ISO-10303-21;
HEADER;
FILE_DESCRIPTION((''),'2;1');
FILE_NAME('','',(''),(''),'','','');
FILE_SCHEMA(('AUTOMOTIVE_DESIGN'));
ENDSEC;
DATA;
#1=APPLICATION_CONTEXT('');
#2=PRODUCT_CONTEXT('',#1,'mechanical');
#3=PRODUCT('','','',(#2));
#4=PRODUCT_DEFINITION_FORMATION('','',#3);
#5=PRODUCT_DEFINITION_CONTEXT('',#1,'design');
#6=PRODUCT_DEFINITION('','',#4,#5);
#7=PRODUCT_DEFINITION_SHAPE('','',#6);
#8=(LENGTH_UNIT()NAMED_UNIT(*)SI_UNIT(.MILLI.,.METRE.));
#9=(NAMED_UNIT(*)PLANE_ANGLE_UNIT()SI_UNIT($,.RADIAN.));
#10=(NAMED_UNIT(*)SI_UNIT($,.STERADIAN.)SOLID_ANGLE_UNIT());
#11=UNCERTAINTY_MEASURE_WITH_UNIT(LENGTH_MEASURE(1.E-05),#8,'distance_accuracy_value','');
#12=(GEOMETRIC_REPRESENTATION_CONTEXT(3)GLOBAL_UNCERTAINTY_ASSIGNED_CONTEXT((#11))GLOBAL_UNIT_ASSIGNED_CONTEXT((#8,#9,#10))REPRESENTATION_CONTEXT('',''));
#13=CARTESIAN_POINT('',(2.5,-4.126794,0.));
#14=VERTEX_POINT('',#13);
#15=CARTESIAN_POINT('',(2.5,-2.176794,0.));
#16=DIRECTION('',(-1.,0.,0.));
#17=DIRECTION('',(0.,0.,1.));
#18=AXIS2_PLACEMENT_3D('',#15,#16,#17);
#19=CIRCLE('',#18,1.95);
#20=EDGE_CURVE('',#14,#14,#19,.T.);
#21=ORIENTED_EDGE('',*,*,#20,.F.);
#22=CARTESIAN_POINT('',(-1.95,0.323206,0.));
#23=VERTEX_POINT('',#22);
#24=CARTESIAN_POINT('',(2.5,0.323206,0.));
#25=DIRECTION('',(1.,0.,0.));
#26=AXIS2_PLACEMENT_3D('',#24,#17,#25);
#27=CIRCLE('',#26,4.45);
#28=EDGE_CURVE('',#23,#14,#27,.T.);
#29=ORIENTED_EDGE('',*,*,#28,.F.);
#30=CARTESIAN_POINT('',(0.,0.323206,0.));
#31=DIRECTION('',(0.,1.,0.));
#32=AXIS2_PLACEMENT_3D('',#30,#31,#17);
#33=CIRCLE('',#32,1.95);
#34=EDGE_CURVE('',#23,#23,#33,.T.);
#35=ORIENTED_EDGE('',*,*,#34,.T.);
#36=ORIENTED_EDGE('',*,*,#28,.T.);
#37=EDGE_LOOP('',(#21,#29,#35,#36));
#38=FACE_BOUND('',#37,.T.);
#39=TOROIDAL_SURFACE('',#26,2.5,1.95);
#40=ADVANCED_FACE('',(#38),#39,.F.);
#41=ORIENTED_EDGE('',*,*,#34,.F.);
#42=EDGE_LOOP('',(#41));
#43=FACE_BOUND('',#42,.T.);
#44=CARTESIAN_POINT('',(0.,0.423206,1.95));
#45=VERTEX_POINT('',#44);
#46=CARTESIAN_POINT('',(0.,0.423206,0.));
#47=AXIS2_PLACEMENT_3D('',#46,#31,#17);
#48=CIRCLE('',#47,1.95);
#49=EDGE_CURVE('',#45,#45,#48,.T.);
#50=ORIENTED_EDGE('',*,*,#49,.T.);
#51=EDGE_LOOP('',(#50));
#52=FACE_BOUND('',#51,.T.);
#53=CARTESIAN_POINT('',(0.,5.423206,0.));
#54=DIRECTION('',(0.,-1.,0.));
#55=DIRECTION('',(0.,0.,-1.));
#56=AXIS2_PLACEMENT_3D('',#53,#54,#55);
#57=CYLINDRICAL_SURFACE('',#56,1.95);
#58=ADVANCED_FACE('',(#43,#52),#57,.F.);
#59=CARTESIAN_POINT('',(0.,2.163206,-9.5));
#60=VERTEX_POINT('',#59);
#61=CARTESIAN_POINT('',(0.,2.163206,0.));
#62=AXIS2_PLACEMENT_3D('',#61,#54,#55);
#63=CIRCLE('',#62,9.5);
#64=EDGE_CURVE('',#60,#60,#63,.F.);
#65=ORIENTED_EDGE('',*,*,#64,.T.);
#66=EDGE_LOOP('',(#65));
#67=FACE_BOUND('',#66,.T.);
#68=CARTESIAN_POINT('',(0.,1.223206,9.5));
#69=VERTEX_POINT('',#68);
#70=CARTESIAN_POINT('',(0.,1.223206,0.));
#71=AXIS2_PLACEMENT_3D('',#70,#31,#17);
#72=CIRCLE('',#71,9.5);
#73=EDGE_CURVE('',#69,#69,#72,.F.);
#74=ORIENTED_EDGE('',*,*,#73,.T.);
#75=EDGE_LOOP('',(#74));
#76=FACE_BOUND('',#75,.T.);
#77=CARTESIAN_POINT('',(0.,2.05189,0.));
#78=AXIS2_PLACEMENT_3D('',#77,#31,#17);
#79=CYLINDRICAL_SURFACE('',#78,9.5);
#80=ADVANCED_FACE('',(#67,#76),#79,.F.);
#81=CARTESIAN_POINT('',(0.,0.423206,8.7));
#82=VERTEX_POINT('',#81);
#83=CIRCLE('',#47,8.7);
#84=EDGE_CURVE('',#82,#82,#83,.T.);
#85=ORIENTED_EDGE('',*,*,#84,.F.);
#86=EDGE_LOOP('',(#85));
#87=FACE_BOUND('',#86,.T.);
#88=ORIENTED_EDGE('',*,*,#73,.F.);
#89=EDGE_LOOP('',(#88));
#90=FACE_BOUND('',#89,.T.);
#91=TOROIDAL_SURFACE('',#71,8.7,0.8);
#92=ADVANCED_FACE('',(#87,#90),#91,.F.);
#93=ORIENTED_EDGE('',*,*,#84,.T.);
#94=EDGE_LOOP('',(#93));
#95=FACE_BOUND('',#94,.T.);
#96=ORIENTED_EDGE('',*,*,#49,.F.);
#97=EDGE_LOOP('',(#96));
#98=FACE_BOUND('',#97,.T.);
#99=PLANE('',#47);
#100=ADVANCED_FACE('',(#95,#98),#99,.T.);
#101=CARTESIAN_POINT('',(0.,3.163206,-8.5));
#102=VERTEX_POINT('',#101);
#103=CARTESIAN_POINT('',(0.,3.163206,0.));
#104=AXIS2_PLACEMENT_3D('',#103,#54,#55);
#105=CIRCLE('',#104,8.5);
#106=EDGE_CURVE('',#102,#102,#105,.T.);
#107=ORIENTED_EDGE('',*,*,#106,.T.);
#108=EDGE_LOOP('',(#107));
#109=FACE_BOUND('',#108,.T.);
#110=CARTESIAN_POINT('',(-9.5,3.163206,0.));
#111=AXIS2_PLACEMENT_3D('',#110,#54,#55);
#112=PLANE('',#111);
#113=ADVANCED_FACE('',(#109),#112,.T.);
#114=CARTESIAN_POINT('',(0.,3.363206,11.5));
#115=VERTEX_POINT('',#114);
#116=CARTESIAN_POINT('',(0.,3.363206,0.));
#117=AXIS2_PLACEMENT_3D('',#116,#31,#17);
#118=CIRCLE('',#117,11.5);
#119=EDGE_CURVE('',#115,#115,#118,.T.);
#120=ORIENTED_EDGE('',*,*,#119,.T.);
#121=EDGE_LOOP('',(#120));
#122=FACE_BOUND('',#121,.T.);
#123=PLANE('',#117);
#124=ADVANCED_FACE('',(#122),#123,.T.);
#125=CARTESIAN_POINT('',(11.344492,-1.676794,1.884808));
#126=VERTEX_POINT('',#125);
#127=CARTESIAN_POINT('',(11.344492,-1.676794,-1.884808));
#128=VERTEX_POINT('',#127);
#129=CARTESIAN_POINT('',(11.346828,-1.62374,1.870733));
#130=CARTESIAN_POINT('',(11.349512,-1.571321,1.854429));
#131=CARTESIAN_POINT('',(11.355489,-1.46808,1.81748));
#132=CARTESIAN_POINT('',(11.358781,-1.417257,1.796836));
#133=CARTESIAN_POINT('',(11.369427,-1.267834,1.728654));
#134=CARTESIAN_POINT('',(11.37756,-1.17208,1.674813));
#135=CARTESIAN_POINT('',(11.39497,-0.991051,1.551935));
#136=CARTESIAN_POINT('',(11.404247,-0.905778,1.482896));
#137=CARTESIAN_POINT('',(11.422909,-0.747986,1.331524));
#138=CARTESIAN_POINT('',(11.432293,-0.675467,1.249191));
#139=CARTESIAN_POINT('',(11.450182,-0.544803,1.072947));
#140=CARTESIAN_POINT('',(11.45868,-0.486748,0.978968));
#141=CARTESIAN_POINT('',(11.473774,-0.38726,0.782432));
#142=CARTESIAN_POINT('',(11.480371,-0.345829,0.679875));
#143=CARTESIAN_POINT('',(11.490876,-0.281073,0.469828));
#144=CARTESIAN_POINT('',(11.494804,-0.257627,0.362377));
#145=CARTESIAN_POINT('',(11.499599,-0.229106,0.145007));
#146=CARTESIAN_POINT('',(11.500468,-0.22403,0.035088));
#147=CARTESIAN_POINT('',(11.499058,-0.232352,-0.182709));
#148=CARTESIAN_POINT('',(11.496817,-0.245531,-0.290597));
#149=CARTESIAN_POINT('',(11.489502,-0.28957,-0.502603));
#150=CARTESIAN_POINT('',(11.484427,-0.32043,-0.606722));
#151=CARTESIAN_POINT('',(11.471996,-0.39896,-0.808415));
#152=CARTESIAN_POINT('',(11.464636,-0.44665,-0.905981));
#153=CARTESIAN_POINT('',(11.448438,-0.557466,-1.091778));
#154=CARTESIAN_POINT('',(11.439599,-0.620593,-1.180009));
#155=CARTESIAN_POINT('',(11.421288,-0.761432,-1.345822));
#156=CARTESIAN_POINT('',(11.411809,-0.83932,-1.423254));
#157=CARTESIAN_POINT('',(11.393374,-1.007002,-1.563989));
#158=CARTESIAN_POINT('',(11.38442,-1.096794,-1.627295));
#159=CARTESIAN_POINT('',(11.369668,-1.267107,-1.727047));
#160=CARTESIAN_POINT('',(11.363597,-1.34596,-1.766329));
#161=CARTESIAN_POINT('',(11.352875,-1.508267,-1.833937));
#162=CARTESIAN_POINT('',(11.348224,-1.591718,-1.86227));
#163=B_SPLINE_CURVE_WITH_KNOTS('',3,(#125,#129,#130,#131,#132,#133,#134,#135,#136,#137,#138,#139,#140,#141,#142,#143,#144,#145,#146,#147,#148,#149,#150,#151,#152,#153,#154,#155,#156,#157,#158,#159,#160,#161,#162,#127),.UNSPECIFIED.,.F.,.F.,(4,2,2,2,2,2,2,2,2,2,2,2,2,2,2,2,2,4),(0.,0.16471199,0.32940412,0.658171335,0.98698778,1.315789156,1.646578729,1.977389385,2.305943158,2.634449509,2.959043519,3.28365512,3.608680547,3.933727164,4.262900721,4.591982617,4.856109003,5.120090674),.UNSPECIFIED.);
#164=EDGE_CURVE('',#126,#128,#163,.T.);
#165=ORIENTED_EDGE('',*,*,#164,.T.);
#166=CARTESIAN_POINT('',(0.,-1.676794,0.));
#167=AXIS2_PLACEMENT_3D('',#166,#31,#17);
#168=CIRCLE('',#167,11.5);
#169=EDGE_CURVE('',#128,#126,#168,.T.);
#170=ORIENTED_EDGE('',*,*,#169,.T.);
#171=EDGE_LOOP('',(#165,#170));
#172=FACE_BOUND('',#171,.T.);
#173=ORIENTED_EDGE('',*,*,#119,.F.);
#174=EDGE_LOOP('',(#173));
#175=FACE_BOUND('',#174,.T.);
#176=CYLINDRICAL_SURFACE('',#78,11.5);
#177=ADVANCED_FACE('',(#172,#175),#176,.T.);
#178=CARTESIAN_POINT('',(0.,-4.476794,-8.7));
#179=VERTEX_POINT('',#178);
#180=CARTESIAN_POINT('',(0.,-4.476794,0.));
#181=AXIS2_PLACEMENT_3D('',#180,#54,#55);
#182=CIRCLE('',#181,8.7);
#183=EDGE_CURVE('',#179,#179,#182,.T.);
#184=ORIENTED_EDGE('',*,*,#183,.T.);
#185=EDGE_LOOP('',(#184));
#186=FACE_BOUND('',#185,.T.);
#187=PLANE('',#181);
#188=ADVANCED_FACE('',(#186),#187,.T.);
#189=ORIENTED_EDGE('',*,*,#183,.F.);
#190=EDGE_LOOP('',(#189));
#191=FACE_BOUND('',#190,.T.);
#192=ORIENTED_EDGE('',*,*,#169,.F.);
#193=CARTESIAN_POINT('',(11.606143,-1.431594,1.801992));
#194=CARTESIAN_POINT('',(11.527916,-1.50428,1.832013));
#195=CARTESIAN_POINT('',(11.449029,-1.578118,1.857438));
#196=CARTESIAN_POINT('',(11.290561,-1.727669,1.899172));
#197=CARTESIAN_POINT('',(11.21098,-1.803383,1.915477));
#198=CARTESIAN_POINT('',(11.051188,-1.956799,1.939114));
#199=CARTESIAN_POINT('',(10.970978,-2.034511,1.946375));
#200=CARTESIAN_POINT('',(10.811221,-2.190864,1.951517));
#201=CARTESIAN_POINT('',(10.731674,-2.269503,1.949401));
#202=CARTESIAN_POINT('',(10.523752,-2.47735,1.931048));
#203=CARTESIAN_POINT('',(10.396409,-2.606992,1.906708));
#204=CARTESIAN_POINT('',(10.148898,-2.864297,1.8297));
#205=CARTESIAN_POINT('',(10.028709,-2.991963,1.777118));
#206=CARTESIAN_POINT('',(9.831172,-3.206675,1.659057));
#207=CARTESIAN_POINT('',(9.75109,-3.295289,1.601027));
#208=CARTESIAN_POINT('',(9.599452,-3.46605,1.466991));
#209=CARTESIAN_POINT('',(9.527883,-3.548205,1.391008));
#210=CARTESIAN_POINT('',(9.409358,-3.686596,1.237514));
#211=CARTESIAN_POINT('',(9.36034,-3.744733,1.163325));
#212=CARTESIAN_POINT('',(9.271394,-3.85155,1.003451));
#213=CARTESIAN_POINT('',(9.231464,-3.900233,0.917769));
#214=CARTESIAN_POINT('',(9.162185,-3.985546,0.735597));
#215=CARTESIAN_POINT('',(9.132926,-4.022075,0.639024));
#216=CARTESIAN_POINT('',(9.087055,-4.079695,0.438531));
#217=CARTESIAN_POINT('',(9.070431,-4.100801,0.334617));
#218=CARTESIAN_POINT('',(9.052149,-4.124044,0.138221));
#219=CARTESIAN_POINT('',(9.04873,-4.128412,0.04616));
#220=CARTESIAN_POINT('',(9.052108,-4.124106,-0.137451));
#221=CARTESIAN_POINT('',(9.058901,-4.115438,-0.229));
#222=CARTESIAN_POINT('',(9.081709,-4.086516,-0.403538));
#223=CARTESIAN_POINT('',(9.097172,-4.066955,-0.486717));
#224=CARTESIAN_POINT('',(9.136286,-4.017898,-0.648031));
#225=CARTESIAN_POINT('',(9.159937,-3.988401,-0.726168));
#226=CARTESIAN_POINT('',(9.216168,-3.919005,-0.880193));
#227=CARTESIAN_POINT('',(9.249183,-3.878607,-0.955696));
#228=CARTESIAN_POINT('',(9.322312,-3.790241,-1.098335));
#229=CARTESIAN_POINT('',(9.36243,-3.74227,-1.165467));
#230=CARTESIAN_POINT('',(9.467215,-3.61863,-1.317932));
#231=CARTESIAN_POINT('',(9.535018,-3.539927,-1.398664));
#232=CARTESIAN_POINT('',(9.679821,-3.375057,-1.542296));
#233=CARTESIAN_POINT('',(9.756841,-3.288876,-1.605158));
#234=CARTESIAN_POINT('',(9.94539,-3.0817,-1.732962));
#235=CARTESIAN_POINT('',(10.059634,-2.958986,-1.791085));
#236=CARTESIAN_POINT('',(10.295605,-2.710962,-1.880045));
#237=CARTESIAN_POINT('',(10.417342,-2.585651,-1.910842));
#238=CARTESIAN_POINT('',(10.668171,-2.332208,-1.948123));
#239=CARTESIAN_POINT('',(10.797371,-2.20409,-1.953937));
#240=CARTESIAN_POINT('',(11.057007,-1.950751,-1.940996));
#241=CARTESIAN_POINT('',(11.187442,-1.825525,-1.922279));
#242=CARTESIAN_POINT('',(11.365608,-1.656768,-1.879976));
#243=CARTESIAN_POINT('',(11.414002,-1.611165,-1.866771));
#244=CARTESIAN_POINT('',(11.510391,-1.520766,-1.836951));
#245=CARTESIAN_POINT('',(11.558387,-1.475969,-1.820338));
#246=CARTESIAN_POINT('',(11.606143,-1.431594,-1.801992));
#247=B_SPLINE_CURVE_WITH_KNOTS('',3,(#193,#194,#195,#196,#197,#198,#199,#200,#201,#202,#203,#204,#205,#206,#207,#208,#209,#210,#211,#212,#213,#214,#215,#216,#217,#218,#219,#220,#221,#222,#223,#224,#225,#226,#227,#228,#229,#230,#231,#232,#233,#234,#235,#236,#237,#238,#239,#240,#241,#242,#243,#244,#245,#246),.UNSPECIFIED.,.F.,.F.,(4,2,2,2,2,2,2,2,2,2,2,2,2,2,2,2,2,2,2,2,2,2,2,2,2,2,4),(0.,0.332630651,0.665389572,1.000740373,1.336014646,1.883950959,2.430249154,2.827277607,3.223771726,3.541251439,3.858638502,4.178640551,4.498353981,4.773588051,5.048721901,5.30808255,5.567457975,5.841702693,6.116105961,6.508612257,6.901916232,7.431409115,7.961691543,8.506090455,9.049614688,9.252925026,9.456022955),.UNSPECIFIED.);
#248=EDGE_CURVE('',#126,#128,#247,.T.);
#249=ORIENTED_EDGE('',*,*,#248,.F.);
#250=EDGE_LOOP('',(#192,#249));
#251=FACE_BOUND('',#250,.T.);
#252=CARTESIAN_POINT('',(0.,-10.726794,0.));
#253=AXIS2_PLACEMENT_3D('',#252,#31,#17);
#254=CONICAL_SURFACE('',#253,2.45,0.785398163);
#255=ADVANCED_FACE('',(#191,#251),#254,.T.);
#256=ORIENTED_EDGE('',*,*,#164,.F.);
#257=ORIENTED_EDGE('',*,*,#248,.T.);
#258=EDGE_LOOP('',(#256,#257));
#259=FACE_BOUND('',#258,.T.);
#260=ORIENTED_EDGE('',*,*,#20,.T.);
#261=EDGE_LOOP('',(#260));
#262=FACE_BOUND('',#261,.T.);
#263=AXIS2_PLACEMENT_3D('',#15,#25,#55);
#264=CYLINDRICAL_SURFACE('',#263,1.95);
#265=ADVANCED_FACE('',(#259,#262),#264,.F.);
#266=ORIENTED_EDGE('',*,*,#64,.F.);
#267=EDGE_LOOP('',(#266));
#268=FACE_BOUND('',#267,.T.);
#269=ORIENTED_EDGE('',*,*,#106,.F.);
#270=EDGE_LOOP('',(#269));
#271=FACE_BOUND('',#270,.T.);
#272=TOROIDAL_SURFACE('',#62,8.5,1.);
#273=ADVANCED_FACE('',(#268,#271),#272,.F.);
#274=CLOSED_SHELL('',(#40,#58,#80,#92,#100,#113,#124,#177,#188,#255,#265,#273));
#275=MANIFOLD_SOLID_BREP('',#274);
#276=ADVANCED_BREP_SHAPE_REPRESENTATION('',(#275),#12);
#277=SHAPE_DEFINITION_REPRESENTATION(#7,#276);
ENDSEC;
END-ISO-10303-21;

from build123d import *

# Parameters (mm, degrees)
FILLET3_R           = 0.8
FILLET4_R           = 1
SKETCH6_R           = 2.45
BOSS_EXTRUDE2_DEPTH = 2.8
CHAMFER2_SIZE       = 9.05
SKETCH9_R           = 1.95


with BuildPart() as part:
    # Sketch1 → Revolve1 (revolve)
    with BuildSketch(Plane.XY, mode=Mode.PRIVATE) as revolve1_sk:
        Polygon((0, 3.363206456), (-11.5, 3.363206456), (-11.5, -1.676793544), (0, -1.676793544), (0, 0.423206456), (-9.5, 0.423206456), (-9.5, 3.163206456), (0, 3.163206456), align=None)
    revolve(revolve1_sk.sketch.rotate(Axis((0, 2.051889918, 0), (0, -1, 0)), 270), axis=Axis((0, 2.051889918, 0), (0, -1, 0)))

    # Fillet3
    fillet3_edges = [part.edges().sort_by_distance(p)[0] for p in [
        (0, 0.423206456, -9.5),
    ]]
    fillet(fillet3_edges, radius=FILLET3_R)

    # Fillet4
    fillet4_edges = [part.edges().sort_by_distance(p)[0] for p in [
        (0, 3.163206456, -9.5),
    ]]
    fillet(fillet4_edges, radius=FILLET4_R)

    # Sketch6 → Boss-Extrude2 (add)
    with BuildSketch(Plane.XZ.offset(1.676793544)):
        with Locations(Location((0, 0, 0), (0, 0, 270))):
            Circle(SKETCH6_R)
    extrude(amount=BOSS_EXTRUDE2_DEPTH)

    # Chamfer2
    # the kernel refuses this chamfer: 9.05 mm, written as the material it adds along each edge
    with BuildSketch(Plane(origin=(0, -1.676793544, 0), x_dir=(0, 0, -1), z_dir=(-1, 0, 0))) as chamfer2_piece_1_section:
        Polygon((2.45 + CHAMFER2_SIZE, 0), (2.45, CHAMFER2_SIZE), (2.45, 0), align=None)
    chamfer2_piece_1 = revolve(axis=Axis((0, -1.676793544, 0), (0, -1, 0)), mode=Mode.PRIVATE)
    chamfer2_piece_1 = chamfer2_piece_1 & Plane(origin=(0, -3.007193491, 0), x_dir=(0, 0, 1), z_dir=(0, -1, 0)) * Cylinder(11.5, 46, mode=Mode.PRIVATE)
    chamfer2_piece_1 = split(chamfer2_piece_1, bisect_by=Plane(origin=(0, -4.476793544, 10.030399947), z_dir=(0, 1, 0)), keep=Keep.TOP, mode=Mode.PRIVATE)
    add(chamfer2_piece_1)

    # Cut-Sweep1: sweep along a path in Sketch10
    with BuildLine(Plane.XY) as cut_sweep1_path:
        Line((0, 0.423206456), (0, 0.323206456))
        ThreePointArc((0, 0.323206456), (0.732233047, -1.444560497), (2.5, -2.176793544))
        Line((2.5, -2.176793544), (11.5, -2.176793544))
    # Sketch9 → Cut-Sweep1 (sweep, cut)
    with BuildSketch(Plane(origin=(0, 0.423206456, 0), x_dir=(1, 0, 0), z_dir=(0, 1, 0))):
        Circle(SKETCH9_R)
    sweep(path=cut_sweep1_path.line, mode=Mode.SUBTRACT)


solid = part.part
